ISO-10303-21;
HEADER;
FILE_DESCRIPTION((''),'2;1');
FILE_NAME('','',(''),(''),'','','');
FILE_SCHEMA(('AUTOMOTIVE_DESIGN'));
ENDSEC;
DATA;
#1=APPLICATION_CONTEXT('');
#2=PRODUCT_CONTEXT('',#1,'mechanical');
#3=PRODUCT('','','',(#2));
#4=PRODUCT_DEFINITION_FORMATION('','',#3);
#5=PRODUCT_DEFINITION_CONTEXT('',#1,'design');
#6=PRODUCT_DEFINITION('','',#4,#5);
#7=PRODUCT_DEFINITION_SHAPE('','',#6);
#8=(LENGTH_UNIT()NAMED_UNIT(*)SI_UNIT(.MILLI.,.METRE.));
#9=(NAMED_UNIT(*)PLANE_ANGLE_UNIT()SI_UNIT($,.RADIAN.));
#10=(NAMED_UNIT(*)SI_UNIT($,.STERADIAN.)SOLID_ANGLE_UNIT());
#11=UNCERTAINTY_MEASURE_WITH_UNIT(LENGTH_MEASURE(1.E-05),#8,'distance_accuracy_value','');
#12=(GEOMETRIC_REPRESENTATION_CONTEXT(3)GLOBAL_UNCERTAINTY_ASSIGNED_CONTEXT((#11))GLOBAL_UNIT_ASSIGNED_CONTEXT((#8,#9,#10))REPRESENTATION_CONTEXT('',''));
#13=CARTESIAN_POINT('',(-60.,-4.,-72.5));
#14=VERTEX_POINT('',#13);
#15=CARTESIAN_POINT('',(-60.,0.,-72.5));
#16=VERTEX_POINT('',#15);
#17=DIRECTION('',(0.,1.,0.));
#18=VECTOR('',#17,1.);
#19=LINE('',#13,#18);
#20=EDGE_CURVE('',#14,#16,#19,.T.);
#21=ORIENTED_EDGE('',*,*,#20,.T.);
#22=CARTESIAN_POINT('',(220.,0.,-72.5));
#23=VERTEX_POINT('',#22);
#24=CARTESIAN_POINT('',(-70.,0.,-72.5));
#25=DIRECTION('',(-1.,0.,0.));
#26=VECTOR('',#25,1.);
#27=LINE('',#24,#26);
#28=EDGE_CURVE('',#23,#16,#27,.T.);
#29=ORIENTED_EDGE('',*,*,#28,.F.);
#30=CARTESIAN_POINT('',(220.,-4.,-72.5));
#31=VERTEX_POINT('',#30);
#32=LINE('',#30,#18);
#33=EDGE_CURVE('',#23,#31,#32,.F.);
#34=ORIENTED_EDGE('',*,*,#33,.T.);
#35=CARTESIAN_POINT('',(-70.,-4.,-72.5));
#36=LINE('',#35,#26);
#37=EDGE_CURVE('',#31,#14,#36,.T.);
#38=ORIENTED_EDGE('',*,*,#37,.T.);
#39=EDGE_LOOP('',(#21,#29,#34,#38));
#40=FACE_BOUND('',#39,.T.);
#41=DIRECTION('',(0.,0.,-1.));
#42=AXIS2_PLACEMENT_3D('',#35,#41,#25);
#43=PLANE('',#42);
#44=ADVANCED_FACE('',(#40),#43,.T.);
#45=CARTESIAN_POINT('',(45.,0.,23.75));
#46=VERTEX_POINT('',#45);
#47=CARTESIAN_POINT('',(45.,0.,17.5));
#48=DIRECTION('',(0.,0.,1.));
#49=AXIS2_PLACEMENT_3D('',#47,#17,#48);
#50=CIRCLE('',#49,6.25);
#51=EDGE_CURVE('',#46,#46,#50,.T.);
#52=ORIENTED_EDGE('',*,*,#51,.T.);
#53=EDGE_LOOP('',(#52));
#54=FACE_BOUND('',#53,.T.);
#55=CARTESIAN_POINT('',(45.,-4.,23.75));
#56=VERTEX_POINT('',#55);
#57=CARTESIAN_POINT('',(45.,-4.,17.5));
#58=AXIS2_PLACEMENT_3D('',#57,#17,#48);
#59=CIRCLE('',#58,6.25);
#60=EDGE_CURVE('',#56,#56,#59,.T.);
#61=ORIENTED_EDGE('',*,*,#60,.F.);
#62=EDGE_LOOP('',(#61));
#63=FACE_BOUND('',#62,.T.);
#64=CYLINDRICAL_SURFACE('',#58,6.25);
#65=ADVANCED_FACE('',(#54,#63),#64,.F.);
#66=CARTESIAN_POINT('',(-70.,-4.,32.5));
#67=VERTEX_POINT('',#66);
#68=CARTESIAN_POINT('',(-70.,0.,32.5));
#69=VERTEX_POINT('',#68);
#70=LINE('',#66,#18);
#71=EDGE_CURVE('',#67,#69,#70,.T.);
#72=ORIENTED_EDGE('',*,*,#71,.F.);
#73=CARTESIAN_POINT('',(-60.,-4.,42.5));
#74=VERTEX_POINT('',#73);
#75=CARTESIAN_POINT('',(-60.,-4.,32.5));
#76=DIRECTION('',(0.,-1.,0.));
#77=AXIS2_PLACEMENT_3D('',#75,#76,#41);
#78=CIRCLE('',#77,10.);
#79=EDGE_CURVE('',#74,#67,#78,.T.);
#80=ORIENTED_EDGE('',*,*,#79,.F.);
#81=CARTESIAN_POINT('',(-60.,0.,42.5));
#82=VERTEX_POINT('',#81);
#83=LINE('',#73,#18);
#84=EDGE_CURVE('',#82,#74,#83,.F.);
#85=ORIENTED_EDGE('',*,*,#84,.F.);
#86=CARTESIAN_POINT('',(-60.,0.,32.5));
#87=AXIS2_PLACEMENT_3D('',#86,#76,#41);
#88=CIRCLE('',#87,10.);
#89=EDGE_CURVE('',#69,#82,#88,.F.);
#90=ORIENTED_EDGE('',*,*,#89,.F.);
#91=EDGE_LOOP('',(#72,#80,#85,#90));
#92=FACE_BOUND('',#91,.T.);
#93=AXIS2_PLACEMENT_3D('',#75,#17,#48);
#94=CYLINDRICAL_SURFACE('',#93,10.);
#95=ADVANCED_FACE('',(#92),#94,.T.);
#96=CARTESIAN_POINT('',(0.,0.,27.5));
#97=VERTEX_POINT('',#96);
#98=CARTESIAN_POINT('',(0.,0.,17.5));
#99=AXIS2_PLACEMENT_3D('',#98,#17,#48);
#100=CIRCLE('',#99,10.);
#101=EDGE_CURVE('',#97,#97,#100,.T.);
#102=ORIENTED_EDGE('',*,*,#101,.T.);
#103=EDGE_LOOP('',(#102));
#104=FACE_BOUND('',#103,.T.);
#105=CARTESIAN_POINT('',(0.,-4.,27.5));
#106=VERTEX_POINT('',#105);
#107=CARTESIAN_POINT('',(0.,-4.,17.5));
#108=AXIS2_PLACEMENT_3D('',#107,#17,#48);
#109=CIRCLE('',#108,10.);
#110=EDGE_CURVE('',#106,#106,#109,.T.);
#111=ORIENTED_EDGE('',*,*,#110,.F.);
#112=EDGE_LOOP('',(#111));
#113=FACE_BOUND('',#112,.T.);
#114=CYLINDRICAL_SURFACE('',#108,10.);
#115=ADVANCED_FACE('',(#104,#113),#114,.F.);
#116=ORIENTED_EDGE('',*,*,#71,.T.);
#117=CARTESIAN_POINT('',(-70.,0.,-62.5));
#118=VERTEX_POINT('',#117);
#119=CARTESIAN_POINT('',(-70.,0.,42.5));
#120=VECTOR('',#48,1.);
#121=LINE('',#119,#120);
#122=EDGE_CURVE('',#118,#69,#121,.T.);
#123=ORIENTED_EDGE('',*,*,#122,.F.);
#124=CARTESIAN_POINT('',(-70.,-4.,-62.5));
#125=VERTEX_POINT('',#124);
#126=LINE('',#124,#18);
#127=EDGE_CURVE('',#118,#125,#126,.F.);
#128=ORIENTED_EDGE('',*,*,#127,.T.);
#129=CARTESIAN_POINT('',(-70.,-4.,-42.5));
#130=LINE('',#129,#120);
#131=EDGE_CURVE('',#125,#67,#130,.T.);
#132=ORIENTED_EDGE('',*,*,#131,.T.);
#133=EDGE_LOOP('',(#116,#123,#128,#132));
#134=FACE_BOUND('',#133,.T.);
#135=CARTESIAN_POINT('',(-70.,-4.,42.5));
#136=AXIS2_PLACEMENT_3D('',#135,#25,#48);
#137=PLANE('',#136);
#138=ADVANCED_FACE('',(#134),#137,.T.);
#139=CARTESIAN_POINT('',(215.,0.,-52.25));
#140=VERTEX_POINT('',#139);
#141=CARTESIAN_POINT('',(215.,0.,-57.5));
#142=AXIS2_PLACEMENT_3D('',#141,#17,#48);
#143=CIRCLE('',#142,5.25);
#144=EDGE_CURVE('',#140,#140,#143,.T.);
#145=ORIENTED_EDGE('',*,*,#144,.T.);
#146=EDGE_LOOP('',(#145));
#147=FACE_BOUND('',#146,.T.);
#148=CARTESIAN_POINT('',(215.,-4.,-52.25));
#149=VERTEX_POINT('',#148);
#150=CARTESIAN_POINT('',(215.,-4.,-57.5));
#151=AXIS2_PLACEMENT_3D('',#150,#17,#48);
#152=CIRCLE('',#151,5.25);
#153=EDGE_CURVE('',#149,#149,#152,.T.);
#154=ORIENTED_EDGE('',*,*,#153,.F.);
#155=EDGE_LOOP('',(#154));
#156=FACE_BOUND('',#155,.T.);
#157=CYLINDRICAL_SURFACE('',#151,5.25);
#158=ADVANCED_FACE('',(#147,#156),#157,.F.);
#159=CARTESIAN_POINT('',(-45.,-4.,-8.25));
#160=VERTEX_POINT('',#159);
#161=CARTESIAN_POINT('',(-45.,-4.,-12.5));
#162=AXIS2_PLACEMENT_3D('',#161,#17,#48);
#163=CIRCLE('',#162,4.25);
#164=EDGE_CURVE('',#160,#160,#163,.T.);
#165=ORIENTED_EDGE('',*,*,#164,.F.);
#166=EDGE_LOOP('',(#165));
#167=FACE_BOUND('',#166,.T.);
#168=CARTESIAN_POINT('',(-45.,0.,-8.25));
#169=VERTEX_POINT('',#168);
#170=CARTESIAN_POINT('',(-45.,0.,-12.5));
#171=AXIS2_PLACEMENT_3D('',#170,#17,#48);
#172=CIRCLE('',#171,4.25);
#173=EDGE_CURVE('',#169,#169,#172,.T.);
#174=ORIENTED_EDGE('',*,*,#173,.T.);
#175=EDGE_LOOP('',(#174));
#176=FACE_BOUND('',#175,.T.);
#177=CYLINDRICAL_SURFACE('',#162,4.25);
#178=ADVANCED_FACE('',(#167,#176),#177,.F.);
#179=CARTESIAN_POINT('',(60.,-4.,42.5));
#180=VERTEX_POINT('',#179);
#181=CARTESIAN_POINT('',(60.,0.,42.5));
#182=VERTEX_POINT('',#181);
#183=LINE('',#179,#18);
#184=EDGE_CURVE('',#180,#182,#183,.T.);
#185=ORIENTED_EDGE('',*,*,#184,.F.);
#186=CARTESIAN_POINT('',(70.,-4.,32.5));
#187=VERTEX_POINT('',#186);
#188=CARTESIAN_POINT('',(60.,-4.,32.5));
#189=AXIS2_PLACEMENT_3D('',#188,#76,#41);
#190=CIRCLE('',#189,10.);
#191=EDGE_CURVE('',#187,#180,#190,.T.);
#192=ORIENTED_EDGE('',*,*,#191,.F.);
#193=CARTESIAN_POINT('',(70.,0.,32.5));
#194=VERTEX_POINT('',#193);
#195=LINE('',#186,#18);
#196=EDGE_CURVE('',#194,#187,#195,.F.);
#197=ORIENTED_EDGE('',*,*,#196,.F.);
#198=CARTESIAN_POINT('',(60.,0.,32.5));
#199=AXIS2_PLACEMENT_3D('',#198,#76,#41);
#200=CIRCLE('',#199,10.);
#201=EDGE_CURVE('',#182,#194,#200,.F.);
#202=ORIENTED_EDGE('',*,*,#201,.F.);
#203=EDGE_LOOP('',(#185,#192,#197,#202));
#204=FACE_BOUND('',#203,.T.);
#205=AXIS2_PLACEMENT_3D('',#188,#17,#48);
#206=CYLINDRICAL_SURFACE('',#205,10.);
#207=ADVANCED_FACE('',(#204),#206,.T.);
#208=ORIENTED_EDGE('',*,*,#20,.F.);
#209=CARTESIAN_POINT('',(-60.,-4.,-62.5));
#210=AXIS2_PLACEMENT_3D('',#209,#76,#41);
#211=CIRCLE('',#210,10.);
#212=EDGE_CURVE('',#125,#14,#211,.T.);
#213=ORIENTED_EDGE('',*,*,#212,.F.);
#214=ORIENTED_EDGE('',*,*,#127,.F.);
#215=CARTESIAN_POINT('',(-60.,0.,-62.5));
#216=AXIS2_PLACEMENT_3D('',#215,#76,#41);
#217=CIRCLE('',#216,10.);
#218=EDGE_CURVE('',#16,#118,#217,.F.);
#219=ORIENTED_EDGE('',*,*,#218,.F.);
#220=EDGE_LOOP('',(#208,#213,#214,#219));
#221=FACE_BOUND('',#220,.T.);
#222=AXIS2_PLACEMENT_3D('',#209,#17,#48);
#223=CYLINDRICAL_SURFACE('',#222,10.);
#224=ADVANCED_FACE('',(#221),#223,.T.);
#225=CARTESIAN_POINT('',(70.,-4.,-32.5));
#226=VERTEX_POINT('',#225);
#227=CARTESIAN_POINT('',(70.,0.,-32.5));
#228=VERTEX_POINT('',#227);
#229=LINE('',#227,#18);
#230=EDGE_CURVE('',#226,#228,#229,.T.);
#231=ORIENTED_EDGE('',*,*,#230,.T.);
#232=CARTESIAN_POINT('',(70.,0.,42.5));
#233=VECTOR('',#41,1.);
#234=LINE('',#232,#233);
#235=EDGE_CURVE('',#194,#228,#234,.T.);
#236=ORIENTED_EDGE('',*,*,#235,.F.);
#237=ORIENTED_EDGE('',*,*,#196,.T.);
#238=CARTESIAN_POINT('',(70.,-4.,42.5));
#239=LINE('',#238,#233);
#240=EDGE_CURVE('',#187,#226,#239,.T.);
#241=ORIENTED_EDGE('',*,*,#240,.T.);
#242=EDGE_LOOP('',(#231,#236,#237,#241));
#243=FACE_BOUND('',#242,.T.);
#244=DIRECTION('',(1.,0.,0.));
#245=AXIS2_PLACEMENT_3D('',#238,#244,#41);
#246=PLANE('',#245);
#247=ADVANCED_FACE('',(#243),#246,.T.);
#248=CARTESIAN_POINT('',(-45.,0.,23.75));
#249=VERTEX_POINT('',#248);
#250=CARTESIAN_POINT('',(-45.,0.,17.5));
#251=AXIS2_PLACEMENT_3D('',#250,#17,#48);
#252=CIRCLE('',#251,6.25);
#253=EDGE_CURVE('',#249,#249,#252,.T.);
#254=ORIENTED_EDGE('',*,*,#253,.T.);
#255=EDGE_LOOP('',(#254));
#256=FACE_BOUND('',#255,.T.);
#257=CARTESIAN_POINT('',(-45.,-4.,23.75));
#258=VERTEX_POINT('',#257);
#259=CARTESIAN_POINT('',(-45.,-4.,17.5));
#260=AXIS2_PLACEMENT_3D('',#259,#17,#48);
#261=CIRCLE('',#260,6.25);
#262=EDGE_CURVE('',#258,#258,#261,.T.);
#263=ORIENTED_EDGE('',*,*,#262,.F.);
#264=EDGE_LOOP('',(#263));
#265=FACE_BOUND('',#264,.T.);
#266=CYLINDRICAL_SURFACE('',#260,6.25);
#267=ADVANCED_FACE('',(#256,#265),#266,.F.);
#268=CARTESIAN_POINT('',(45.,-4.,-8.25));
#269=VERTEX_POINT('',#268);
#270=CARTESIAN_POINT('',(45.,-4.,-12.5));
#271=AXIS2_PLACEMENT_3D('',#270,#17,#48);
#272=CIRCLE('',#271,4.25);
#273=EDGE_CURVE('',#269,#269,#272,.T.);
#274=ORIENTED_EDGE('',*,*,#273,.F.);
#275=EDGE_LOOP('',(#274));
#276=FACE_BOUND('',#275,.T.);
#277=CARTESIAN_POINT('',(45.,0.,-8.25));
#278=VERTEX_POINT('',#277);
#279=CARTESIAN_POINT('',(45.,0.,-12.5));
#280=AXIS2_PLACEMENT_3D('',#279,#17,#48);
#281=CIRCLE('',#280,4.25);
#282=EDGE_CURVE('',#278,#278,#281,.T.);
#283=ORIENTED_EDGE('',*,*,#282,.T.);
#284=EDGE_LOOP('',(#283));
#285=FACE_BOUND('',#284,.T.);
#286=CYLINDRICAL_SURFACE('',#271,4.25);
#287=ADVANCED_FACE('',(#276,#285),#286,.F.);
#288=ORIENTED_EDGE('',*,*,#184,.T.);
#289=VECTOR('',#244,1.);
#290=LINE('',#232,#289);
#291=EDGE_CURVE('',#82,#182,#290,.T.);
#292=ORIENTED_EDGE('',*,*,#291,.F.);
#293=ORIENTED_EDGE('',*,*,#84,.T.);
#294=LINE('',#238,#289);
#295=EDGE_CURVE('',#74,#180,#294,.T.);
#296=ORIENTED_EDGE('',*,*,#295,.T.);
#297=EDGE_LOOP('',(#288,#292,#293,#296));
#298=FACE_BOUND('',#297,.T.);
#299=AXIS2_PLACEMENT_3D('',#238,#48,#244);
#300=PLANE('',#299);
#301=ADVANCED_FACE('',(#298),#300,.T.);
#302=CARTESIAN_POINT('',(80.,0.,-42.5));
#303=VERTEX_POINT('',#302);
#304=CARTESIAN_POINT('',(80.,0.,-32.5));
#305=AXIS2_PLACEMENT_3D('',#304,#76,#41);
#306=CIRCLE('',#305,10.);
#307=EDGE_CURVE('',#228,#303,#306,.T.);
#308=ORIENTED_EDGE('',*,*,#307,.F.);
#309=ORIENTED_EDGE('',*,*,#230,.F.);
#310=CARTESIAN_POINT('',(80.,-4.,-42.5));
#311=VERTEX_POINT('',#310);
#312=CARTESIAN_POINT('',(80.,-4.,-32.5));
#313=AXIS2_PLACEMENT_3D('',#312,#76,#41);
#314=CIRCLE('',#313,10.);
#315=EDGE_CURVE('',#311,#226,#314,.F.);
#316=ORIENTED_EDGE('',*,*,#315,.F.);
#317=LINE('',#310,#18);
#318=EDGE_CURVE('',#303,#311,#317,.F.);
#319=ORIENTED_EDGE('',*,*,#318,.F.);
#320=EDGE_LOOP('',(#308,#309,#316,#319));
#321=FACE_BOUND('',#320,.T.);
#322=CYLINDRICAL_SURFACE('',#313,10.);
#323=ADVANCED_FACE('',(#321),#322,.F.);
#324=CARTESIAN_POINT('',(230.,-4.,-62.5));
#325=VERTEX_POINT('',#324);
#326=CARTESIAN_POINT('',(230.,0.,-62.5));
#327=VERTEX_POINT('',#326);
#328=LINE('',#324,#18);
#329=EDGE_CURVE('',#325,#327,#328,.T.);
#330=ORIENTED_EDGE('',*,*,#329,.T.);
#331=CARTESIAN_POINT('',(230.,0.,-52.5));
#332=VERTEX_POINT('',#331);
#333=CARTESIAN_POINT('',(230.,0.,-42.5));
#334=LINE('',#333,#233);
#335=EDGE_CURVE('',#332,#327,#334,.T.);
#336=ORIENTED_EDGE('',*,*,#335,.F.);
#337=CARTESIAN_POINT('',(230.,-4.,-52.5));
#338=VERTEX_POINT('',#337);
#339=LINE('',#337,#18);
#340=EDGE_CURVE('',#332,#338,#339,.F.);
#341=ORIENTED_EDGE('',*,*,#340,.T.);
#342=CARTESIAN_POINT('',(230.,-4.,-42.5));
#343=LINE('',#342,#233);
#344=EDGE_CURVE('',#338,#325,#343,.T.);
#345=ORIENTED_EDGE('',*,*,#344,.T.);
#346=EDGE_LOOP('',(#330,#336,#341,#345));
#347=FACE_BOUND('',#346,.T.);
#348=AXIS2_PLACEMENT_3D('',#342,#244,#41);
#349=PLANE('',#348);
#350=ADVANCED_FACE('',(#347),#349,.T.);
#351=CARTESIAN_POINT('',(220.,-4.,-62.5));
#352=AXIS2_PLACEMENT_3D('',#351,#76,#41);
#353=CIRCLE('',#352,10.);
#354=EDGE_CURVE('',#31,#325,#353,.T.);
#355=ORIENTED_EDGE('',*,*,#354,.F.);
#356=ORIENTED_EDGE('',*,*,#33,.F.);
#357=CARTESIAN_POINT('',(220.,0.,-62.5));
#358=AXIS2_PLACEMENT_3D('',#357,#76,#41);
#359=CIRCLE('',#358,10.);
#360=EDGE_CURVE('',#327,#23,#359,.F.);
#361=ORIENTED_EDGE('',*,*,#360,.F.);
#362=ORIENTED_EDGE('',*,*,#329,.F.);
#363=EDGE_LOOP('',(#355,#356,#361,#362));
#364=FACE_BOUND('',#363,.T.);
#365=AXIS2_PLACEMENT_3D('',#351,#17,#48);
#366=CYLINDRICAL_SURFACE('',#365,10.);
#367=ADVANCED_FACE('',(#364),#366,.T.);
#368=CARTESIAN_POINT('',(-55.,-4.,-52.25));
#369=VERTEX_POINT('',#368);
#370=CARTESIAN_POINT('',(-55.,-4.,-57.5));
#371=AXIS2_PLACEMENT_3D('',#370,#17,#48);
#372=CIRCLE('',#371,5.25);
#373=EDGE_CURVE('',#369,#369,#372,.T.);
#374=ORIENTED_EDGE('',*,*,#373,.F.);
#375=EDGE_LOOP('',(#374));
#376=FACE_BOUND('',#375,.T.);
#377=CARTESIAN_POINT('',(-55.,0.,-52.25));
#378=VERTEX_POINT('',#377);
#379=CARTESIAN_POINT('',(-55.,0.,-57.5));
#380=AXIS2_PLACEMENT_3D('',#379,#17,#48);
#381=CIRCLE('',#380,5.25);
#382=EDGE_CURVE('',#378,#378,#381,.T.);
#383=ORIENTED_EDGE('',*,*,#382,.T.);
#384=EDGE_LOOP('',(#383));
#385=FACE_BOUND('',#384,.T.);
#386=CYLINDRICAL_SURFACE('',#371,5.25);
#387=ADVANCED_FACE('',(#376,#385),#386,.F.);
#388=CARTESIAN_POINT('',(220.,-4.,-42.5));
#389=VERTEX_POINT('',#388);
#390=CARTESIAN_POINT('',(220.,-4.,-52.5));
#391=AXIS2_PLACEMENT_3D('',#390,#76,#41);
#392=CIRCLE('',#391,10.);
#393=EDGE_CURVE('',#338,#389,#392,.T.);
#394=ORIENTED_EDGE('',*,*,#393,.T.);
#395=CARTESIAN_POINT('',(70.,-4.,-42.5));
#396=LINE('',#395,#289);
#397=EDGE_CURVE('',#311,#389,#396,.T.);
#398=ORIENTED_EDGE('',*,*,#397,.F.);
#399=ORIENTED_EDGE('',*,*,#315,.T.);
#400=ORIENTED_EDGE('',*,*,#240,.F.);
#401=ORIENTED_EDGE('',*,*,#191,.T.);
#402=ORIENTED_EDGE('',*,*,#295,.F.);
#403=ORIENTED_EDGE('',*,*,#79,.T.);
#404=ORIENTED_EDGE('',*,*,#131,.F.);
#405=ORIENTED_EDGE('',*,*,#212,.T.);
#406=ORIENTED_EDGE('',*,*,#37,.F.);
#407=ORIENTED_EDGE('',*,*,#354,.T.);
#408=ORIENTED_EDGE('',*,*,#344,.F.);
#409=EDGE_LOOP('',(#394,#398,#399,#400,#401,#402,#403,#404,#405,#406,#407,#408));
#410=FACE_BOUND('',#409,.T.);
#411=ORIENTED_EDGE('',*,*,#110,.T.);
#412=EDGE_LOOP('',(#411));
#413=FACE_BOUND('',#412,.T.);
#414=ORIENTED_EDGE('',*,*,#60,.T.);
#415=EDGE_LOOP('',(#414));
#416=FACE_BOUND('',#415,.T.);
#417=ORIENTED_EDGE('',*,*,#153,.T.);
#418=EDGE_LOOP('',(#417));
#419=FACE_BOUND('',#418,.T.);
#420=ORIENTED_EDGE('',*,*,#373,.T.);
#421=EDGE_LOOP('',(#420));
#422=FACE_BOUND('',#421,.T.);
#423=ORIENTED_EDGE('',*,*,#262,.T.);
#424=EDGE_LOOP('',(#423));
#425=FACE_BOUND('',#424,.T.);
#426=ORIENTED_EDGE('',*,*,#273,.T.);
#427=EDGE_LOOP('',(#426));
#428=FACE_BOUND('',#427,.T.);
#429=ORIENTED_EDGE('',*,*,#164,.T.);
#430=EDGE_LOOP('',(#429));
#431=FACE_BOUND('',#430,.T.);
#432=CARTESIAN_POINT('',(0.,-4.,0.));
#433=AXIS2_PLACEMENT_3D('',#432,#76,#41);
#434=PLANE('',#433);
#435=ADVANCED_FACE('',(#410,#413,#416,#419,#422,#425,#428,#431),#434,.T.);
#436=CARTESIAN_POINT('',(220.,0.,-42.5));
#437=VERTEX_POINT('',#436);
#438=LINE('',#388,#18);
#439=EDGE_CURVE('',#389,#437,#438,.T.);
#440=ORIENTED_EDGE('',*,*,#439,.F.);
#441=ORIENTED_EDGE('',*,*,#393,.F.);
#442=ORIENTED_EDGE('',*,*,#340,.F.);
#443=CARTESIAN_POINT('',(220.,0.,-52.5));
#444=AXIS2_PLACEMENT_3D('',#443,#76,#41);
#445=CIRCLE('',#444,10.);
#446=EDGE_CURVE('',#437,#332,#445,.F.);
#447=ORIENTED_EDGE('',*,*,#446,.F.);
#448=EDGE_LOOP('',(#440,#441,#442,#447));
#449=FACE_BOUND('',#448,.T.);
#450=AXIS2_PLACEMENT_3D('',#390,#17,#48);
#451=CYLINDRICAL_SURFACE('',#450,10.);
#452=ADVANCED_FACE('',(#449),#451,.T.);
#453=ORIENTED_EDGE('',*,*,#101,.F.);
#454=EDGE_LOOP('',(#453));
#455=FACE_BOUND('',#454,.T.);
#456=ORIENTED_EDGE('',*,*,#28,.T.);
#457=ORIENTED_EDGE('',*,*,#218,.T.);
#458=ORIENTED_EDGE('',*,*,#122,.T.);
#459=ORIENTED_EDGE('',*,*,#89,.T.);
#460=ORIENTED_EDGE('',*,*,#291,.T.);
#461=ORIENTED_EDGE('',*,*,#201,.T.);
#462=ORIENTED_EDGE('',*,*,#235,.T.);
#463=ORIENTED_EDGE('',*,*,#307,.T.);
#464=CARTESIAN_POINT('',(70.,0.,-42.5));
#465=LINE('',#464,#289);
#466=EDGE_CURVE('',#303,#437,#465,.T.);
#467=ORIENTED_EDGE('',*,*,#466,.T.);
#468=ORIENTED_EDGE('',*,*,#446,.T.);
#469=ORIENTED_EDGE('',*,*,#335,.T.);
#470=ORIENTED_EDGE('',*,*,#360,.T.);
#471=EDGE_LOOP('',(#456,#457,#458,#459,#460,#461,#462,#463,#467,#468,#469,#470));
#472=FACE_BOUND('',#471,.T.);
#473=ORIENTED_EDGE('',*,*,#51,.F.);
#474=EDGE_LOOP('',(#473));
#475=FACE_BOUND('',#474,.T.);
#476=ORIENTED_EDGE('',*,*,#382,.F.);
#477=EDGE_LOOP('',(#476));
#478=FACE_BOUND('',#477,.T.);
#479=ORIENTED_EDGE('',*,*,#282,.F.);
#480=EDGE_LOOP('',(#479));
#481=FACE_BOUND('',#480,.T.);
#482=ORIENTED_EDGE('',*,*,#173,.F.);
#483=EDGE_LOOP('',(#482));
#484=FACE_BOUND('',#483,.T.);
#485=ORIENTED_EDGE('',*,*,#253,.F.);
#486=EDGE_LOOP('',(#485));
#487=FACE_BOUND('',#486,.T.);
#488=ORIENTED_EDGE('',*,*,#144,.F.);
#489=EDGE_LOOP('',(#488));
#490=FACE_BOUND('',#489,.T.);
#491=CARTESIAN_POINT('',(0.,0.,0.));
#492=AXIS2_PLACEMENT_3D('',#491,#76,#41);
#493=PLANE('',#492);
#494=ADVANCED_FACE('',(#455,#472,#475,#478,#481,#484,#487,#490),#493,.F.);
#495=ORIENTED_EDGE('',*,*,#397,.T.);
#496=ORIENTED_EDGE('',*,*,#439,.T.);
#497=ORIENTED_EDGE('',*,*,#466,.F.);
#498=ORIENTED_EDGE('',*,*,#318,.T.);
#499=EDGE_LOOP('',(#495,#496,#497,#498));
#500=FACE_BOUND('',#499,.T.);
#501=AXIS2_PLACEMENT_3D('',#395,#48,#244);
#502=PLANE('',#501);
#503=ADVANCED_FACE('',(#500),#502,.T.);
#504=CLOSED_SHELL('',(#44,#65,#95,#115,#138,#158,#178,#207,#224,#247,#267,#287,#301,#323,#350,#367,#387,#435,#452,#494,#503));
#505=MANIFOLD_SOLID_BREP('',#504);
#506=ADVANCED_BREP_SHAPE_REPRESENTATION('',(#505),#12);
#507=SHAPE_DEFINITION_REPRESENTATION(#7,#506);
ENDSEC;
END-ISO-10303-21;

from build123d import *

# Parameters (mm, degrees)
SKETCH1_R          = 5.25
SKETCH1_R_2        = 10
SKETCH1_R_3        = 6.25
SKETCH1_R_4        = 4.25
BASE_FLANGE1_DEPTH = 4
FILLET1_R          = 10


# Sheet-metal steps are written as plain solids
with BuildPart() as part:
    # Sketch1 → Base-Flange1 (new body)
    with BuildSketch(Plane(origin=(0, 0, 0), x_dir=(1, 0, 0), z_dir=(0, 1, 0))):
        Polygon((70, -42.5), (-70, -42.5), (-70, 42.5), (-70, 72.5), (230, 72.5), (230, 42.5), (70, 42.5), align=None)
        with Locations(Location((-55, 57.5, 0), (0, 0, 270))):
            Circle(SKETCH1_R, mode=Mode.SUBTRACT)
        with Locations(Location((215, 57.5, 0), (0, 0, 270))):
            Circle(SKETCH1_R, mode=Mode.SUBTRACT)
        with Locations(Location((0, -17.5, 0), (0, 0, 270))):
            Circle(SKETCH1_R_2, mode=Mode.SUBTRACT)
        with Locations(Location((-45, -17.5, 0), (0, 0, 270))):
            Circle(SKETCH1_R_3, mode=Mode.SUBTRACT)
        with Locations(Location((45, -17.5, 0), (0, 0, 270))):
            Circle(SKETCH1_R_3, mode=Mode.SUBTRACT)
        with Locations(Location((-45, 12.5, 0), (0, 0, 270))):
            Circle(SKETCH1_R_4, mode=Mode.SUBTRACT)
        with Locations(Location((45, 12.5, 0), (0, 0, 270))):
            Circle(SKETCH1_R_4, mode=Mode.SUBTRACT)
    extrude(amount=-BASE_FLANGE1_DEPTH)

    # Fillet1
    fillet1_edges = [part.edges().sort_by_distance(p)[0] for p in [
        (-70, -2, -72.5),
        (230, -2, -72.5),
        (230, -2, -42.5),
        (70, -2, -42.5),
        (70, -2, 42.5),
        (-70, -2, 42.5),
    ]]
    fillet(fillet1_edges, radius=FILLET1_R)


solid = part.part
